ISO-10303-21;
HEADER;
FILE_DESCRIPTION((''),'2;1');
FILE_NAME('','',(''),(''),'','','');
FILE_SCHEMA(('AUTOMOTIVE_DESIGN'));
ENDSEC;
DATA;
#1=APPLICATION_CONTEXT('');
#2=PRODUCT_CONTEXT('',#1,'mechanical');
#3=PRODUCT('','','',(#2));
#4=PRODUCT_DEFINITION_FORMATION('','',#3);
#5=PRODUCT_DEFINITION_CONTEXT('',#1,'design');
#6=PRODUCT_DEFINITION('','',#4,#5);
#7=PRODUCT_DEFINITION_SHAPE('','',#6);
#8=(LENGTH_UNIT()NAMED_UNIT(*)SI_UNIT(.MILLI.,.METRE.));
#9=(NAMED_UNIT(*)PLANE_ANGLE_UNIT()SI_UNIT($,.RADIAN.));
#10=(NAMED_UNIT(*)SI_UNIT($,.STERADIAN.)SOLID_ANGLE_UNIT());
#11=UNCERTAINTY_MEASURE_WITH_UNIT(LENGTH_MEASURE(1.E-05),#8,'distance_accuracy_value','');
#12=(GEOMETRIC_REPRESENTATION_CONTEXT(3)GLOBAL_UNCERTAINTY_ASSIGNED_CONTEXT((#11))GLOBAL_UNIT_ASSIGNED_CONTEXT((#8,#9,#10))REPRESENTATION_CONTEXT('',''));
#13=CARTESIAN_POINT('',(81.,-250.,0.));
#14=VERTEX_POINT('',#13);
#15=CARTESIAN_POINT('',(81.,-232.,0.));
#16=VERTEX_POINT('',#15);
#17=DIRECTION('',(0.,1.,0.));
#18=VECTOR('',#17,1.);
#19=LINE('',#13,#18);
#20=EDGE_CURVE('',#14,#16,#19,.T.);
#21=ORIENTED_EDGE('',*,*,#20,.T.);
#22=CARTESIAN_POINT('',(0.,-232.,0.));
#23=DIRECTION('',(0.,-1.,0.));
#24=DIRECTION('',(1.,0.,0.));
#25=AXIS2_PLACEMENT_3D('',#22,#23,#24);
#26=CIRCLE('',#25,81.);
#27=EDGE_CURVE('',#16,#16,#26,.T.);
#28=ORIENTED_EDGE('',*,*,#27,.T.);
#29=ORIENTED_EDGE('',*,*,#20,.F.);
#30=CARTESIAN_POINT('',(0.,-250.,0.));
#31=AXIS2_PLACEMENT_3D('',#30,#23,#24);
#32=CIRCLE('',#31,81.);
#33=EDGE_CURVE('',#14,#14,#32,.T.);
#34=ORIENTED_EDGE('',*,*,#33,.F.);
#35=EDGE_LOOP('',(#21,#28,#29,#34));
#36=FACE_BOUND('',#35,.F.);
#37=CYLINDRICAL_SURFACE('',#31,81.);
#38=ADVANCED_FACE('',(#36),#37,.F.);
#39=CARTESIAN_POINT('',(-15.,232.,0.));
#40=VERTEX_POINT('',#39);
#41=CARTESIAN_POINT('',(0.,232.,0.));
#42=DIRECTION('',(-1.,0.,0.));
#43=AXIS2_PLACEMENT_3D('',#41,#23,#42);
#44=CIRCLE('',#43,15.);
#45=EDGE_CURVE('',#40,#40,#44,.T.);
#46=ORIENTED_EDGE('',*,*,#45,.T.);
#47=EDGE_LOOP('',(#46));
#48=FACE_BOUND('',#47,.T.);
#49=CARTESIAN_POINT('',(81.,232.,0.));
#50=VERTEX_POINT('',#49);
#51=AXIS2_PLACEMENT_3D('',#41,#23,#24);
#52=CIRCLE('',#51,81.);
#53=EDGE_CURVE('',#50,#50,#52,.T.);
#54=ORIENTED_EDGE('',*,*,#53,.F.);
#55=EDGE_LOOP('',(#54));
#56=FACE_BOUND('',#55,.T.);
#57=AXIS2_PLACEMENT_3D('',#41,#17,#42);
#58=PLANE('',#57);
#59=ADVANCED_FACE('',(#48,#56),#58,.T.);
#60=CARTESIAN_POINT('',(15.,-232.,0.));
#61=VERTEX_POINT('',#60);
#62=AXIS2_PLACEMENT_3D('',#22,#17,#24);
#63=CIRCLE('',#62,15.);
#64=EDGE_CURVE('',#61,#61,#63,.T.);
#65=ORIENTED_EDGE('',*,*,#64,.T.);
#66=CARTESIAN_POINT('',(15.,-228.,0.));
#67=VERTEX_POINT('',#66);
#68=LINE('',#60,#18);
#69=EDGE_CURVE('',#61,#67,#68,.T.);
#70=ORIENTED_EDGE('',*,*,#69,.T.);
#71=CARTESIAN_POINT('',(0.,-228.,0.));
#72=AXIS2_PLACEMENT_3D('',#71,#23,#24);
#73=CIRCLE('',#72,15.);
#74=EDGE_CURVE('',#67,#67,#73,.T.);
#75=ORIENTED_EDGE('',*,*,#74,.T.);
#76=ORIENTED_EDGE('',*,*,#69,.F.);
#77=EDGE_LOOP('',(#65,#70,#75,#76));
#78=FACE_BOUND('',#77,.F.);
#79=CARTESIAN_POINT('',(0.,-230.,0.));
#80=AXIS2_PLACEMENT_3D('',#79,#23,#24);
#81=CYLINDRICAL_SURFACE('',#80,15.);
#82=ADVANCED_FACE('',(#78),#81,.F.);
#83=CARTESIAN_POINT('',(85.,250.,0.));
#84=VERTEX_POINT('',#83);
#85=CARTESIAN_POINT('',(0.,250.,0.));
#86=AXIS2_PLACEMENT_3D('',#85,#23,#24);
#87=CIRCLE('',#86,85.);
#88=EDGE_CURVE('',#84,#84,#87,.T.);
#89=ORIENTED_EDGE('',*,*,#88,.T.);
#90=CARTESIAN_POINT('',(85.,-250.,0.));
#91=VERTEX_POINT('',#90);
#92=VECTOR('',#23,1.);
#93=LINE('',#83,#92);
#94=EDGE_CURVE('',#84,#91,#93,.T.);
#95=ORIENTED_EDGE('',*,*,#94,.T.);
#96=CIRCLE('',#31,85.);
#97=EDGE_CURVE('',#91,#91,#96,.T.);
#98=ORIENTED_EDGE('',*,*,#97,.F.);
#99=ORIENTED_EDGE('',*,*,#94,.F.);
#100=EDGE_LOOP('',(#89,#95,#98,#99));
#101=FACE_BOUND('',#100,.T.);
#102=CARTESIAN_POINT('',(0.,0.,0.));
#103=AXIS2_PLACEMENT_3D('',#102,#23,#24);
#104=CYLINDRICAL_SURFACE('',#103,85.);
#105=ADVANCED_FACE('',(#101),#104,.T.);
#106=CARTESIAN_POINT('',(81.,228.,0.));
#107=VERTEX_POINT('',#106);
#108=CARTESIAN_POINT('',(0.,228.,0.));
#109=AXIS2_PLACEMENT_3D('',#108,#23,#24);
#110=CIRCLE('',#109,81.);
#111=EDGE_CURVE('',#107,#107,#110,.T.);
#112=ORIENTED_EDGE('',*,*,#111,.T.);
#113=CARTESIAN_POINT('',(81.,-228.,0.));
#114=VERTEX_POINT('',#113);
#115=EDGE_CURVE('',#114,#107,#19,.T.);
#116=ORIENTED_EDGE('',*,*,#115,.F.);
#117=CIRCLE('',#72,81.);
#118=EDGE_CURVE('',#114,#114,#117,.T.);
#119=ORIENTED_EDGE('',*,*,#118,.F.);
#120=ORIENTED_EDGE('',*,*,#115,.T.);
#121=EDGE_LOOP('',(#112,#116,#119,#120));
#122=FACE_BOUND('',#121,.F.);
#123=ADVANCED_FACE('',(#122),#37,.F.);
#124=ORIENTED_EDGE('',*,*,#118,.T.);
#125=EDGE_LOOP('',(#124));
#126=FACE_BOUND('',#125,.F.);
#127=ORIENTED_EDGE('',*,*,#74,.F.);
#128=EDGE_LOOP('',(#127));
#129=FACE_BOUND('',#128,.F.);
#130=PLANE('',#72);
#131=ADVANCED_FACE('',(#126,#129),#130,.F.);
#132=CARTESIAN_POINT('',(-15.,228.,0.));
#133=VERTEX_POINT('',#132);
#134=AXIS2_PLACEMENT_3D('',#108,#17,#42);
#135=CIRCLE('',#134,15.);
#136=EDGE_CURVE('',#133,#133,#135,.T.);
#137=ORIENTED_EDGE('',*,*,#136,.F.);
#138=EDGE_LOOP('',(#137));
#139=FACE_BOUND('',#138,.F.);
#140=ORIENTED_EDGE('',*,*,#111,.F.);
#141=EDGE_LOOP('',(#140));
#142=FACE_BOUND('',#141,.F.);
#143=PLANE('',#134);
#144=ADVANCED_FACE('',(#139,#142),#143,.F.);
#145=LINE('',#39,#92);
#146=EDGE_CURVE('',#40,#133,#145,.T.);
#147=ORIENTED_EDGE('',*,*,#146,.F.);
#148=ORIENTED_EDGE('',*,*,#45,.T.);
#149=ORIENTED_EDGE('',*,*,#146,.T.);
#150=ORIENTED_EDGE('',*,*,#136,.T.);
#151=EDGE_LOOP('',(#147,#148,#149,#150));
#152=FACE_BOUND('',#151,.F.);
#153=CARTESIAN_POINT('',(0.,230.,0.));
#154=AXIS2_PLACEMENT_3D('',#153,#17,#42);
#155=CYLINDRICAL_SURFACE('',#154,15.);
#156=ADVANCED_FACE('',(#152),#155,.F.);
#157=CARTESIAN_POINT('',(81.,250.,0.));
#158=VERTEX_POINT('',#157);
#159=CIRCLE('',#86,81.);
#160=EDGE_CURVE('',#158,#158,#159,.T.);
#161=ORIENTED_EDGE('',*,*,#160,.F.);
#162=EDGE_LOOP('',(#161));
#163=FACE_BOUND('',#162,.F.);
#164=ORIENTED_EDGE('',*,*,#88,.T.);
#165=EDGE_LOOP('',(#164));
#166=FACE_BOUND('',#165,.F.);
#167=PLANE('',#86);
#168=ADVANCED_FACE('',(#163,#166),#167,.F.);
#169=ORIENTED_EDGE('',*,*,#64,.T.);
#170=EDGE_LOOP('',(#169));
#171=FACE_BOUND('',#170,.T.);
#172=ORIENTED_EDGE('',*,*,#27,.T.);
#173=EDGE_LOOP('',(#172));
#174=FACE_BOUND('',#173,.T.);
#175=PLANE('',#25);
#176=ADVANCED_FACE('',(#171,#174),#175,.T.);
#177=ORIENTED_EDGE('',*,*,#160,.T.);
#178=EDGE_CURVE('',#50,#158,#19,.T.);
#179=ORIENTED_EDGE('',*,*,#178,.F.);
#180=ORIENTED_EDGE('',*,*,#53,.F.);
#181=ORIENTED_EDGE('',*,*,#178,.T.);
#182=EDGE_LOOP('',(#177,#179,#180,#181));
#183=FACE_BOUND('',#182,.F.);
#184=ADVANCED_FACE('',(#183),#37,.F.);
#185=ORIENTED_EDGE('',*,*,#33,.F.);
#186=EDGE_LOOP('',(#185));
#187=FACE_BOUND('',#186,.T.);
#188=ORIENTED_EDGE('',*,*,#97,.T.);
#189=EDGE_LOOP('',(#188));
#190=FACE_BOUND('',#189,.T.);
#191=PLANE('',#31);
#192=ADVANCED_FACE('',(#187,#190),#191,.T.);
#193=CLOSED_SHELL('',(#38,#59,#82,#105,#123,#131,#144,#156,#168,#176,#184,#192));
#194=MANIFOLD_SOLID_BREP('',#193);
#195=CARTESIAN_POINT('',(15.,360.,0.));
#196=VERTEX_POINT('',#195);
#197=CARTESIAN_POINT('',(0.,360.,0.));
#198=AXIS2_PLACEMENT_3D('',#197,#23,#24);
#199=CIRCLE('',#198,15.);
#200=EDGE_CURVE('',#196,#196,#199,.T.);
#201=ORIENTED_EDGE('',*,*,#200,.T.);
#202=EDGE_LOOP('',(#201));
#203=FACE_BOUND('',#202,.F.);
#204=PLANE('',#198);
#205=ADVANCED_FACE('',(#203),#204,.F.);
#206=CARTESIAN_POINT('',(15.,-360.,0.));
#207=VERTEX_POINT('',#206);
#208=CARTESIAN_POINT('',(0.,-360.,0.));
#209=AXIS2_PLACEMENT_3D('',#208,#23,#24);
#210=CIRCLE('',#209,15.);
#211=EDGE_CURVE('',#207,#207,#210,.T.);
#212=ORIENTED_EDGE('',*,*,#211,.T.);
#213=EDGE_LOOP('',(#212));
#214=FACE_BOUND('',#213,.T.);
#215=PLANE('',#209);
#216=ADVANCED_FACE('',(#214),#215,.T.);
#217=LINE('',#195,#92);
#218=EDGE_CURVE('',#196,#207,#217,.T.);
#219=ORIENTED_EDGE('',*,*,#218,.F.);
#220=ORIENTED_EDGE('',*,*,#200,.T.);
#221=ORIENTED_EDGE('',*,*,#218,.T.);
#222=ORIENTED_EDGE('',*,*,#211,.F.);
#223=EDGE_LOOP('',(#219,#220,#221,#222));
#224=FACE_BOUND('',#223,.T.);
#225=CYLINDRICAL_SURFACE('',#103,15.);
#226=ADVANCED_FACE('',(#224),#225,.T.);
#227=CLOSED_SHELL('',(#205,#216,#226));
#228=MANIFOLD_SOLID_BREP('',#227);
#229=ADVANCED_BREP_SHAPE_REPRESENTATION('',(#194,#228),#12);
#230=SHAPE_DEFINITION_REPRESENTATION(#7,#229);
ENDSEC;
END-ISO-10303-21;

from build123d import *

# Parameters (mm, degrees)
F0_R           = 15
F1_DEPTH       = 360
F1_DEPTH_BACK  = 360
F2_R           = 85
F3_DEPTH       = 250
F3_DEPTH_BACK  = 250
F4_R           = 81
F5_DEPTH       = 610.001
F7_R           = 81
F8_DEPTH       = 2
F8_DEPTH_BACK  = 2
F9_R           = 15
F10_DEPTH      = 4
F10_DEPTH_BACK = 4
F12_R          = 81
F13_DEPTH      = 2
F13_DEPTH_BACK = 2
F14_R          = 15
F15_DEPTH      = 25
F15_DEPTH_BACK = 25


with BuildPart() as f1:
    # F0 (on Front) → F1 (new body, two sides)
    with BuildSketch(Plane.XZ) as f1_sk:
        Circle(F0_R)
    extrude(amount=F1_DEPTH)
    extrude(f1_sk.sketch, amount=-F1_DEPTH_BACK)


with BuildPart() as f3:
    # F2 (on Front) → F3 (new body, two sides)
    with BuildSketch(Plane.XZ) as f3_sk:
        Circle(F2_R)
    extrude(amount=F3_DEPTH)
    extrude(f3_sk.sketch, amount=-F3_DEPTH_BACK)

    # F4 (on face) → F5 (cut, through all)
    with BuildSketch(Plane.XZ.offset(250)):
        Circle(F4_R)
    extrude(amount=-F5_DEPTH, mode=Mode.SUBTRACT)

    # F7 (on offset) → F8 (join, two sides)
    with BuildSketch(Plane.XZ.offset(230)) as f8_sk:
        Circle(F7_R)
    extrude(amount=F8_DEPTH)
    extrude(f8_sk.sketch, amount=-F8_DEPTH_BACK)

    # F9 (on offset) → F10 (cut, two sides)
    with BuildSketch(Plane.XZ.offset(230)) as f10_sk:
        Circle(F9_R)
    extrude(amount=-F10_DEPTH, mode=Mode.SUBTRACT)
    extrude(f10_sk.sketch, amount=F10_DEPTH_BACK, mode=Mode.SUBTRACT)

    # F12 (on offset) → F13 (join, two sides)
    with BuildSketch(Plane(origin=(0, 230, 0), x_dir=(-1, 0, 0), z_dir=(0, 1, 0))) as f13_sk:
        Circle(F12_R)
    extrude(amount=F13_DEPTH)
    extrude(f13_sk.sketch, amount=-F13_DEPTH_BACK)

    # F14 (on offset) → F15 (cut, two sides)
    with BuildSketch(Plane(origin=(0, 230, 0), x_dir=(-1, 0, 0), z_dir=(0, 1, 0))) as f15_sk:
        Circle(F14_R)
    extrude(amount=F15_DEPTH, mode=Mode.SUBTRACT)
    extrude(f15_sk.sketch, amount=-F15_DEPTH_BACK, mode=Mode.SUBTRACT)


solid = Compound([f1.part, f3.part])
